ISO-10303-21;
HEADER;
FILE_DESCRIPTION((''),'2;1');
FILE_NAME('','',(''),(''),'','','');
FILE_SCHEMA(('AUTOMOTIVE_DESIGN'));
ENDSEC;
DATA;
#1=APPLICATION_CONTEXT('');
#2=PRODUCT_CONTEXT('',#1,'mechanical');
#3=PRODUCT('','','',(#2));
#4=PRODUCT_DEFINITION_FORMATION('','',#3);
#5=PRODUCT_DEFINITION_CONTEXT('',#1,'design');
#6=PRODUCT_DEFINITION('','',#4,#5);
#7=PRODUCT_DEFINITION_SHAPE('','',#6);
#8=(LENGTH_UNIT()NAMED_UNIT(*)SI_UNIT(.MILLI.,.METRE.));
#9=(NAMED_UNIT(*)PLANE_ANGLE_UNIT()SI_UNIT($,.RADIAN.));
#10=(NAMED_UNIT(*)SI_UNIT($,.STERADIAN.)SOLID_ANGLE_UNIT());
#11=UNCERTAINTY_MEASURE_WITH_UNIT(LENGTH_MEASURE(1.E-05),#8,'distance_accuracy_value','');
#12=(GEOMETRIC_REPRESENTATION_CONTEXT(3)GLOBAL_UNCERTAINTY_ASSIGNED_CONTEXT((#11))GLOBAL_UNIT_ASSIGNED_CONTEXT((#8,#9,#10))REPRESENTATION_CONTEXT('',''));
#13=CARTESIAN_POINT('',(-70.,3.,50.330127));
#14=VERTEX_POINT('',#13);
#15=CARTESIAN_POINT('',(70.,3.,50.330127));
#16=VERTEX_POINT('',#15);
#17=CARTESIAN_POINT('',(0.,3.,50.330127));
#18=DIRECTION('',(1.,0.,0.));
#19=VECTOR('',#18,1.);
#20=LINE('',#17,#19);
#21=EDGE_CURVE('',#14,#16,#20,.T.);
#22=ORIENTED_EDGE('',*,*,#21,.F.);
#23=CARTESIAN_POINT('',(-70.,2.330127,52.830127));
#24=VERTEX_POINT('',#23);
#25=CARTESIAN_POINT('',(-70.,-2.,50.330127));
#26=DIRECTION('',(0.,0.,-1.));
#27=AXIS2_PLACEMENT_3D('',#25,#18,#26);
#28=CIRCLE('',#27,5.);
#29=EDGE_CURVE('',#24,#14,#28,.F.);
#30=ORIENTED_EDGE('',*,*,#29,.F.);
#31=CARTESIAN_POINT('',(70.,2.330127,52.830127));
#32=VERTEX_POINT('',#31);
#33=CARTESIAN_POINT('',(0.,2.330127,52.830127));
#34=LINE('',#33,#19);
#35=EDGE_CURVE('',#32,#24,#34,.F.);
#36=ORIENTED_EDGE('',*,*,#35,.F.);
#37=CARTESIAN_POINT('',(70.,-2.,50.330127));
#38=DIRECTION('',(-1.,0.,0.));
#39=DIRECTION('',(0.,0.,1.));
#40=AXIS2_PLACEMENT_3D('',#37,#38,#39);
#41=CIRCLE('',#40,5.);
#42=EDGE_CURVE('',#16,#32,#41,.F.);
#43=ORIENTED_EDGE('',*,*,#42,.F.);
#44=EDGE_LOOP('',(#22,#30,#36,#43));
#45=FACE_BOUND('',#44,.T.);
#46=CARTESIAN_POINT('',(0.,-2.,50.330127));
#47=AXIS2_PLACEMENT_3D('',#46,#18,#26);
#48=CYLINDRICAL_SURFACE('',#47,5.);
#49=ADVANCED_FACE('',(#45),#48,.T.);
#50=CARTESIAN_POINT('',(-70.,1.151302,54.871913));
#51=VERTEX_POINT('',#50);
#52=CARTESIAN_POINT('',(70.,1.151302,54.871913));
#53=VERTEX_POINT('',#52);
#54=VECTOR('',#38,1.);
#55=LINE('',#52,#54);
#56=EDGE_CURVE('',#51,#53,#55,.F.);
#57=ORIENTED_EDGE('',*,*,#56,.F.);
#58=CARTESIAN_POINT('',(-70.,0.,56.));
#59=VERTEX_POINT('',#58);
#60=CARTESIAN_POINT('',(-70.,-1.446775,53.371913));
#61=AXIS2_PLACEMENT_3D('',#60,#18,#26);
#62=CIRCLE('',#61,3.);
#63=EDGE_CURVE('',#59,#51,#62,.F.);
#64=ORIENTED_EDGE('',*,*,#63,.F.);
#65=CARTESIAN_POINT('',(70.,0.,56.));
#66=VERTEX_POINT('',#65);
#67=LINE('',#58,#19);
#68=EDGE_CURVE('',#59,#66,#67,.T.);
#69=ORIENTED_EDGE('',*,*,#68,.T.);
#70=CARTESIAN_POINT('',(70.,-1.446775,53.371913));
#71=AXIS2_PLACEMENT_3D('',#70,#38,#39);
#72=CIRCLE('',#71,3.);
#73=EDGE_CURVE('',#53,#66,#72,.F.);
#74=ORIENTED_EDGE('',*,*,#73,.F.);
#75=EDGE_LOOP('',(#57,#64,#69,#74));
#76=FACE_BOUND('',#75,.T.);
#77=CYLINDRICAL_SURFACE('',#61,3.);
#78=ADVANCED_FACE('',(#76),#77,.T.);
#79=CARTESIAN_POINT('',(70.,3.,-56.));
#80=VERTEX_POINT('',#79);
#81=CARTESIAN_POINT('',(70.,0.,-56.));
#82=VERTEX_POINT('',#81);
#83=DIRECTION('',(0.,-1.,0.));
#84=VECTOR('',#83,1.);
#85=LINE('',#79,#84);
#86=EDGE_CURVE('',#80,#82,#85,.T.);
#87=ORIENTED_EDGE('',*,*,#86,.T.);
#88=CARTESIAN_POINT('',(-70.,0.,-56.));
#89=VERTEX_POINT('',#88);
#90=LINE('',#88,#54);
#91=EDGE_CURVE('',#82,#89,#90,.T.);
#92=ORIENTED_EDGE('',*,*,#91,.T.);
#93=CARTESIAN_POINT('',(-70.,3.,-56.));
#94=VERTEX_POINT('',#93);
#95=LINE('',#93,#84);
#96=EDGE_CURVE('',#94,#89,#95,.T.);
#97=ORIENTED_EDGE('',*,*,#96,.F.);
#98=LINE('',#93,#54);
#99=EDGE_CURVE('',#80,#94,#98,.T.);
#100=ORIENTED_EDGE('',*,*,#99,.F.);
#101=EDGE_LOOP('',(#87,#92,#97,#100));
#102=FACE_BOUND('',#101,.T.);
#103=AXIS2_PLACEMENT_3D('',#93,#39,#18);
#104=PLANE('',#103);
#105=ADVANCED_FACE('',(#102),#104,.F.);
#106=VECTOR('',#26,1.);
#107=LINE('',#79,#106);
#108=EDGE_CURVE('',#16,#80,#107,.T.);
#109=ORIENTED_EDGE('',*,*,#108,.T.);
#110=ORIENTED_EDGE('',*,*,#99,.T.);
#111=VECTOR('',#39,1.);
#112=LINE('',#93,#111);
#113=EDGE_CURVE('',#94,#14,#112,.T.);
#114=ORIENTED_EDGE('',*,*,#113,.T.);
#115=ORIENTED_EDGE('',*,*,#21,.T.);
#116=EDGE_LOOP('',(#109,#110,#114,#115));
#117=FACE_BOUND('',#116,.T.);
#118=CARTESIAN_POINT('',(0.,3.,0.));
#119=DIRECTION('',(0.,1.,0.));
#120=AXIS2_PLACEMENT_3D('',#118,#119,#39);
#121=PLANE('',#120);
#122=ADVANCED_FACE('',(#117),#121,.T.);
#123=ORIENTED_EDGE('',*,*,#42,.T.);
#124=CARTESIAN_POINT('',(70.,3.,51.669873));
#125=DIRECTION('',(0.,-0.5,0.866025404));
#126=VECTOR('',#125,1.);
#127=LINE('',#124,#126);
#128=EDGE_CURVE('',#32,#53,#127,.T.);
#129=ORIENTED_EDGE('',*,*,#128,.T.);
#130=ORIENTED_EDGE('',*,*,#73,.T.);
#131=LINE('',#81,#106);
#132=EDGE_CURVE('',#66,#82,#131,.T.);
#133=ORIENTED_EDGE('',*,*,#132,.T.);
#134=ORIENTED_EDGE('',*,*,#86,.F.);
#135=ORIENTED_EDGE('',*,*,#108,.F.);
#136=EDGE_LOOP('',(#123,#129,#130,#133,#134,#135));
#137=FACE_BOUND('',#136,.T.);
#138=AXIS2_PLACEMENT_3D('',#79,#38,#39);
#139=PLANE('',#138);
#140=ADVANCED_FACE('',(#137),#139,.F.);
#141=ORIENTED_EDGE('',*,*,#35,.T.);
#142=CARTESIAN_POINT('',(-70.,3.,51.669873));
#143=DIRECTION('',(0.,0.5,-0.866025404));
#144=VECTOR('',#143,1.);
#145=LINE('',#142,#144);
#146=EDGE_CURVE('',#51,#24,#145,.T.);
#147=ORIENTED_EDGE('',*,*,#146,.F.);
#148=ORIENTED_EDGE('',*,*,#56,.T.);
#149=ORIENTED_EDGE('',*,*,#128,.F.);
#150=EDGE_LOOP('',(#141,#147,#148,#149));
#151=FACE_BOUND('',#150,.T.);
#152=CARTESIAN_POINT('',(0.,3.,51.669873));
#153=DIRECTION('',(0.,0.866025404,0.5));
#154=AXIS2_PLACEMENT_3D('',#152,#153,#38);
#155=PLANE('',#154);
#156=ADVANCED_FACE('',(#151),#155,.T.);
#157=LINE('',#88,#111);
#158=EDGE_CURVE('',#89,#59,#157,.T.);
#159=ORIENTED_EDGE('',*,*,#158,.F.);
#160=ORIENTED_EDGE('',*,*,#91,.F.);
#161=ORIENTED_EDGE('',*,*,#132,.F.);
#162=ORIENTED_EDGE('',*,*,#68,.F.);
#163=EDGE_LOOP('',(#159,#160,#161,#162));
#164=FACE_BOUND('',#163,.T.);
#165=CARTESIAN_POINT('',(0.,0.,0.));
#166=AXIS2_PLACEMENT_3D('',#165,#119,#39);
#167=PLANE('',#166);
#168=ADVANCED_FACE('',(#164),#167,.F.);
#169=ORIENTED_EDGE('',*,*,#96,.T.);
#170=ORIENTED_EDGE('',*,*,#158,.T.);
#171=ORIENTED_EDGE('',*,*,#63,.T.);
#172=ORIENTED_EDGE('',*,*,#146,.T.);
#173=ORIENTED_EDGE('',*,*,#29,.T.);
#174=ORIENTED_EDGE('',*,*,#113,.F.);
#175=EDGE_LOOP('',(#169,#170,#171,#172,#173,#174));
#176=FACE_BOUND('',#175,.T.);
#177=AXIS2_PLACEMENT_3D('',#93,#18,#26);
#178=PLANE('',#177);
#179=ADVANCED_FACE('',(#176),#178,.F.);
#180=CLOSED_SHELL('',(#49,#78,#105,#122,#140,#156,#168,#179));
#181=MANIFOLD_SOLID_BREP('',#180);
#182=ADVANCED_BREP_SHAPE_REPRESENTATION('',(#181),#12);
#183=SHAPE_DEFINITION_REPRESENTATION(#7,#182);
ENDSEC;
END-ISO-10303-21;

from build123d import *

# Parameters (mm, degrees)
SKETCH_1_W      = 140
SKETCH_1_H      = 112
EXTRUDE_1_DEPTH = 3
CHAMFER_1_SIZE  = 2.5
CHAMFER_1_SIZE2 = 4.330127019
FILLET_1_R      = 5
FILLET_2_R      = 3


with BuildPart() as part:
    # Эскиз1 → Бобышка-Вытянуть1 (new body)
    with BuildSketch(Plane(origin=(0, 0, 0), x_dir=(1, 0, 0), z_dir=(0, 1, 0))):
        Rectangle(SKETCH_1_W, SKETCH_1_H)
    extrude(amount=EXTRUDE_1_DEPTH)

    # Фаска1
    chamfer_1_edges = [part.edges().sort_by_distance(p)[0] for p in [
        (0, 3, 56),
    ]]
    chamfer_1_side = [part.faces().sort_by_distance(p)[0] for p in [
        (0, 1.5, 56),
    ]]
    chamfer(chamfer_1_edges, length=CHAMFER_1_SIZE, length2=CHAMFER_1_SIZE2, reference=chamfer_1_side[0])

    # Скругление1
    fillet_1_edges = [part.edges().sort_by_distance(p)[0] for p in [
        (0, 3, 51.669872981),
    ]]
    fillet(fillet_1_edges, radius=FILLET_1_R)

    # Скругление2
    # the kernel refuses this fillet: 3 mm, written as the material it takes off along each edge
    with BuildSketch(Plane(origin=(73.256507609, 0.5, 56), x_dir=(0, 0.49999999999999795, -0.8660254037844398), z_dir=(-1, 0, 0))) as fillet_2_piece_1:
        with BuildLine():
            CenterArc((1.302603044, 3), FILLET_2_R, 238.832994719, 31.167005281)
            Line((-0.25, 0.433012702), (-0.281052061, 0.381672956))
            ThreePointArc((-0.281052061, 0.381672956), (-0.176961524, 0.186506351), (-0.051961524, -0.03))
            Line((-0.051961524, -0.03), (0, -0.06))
            Line((0, -0.06), (1.302603044, -0.06))
            Line((1.302603044, -0.06), (1.302603044, 0))
        make_face()
    extrude(amount=146.513015219, mode=Mode.SUBTRACT)


solid = part.part
